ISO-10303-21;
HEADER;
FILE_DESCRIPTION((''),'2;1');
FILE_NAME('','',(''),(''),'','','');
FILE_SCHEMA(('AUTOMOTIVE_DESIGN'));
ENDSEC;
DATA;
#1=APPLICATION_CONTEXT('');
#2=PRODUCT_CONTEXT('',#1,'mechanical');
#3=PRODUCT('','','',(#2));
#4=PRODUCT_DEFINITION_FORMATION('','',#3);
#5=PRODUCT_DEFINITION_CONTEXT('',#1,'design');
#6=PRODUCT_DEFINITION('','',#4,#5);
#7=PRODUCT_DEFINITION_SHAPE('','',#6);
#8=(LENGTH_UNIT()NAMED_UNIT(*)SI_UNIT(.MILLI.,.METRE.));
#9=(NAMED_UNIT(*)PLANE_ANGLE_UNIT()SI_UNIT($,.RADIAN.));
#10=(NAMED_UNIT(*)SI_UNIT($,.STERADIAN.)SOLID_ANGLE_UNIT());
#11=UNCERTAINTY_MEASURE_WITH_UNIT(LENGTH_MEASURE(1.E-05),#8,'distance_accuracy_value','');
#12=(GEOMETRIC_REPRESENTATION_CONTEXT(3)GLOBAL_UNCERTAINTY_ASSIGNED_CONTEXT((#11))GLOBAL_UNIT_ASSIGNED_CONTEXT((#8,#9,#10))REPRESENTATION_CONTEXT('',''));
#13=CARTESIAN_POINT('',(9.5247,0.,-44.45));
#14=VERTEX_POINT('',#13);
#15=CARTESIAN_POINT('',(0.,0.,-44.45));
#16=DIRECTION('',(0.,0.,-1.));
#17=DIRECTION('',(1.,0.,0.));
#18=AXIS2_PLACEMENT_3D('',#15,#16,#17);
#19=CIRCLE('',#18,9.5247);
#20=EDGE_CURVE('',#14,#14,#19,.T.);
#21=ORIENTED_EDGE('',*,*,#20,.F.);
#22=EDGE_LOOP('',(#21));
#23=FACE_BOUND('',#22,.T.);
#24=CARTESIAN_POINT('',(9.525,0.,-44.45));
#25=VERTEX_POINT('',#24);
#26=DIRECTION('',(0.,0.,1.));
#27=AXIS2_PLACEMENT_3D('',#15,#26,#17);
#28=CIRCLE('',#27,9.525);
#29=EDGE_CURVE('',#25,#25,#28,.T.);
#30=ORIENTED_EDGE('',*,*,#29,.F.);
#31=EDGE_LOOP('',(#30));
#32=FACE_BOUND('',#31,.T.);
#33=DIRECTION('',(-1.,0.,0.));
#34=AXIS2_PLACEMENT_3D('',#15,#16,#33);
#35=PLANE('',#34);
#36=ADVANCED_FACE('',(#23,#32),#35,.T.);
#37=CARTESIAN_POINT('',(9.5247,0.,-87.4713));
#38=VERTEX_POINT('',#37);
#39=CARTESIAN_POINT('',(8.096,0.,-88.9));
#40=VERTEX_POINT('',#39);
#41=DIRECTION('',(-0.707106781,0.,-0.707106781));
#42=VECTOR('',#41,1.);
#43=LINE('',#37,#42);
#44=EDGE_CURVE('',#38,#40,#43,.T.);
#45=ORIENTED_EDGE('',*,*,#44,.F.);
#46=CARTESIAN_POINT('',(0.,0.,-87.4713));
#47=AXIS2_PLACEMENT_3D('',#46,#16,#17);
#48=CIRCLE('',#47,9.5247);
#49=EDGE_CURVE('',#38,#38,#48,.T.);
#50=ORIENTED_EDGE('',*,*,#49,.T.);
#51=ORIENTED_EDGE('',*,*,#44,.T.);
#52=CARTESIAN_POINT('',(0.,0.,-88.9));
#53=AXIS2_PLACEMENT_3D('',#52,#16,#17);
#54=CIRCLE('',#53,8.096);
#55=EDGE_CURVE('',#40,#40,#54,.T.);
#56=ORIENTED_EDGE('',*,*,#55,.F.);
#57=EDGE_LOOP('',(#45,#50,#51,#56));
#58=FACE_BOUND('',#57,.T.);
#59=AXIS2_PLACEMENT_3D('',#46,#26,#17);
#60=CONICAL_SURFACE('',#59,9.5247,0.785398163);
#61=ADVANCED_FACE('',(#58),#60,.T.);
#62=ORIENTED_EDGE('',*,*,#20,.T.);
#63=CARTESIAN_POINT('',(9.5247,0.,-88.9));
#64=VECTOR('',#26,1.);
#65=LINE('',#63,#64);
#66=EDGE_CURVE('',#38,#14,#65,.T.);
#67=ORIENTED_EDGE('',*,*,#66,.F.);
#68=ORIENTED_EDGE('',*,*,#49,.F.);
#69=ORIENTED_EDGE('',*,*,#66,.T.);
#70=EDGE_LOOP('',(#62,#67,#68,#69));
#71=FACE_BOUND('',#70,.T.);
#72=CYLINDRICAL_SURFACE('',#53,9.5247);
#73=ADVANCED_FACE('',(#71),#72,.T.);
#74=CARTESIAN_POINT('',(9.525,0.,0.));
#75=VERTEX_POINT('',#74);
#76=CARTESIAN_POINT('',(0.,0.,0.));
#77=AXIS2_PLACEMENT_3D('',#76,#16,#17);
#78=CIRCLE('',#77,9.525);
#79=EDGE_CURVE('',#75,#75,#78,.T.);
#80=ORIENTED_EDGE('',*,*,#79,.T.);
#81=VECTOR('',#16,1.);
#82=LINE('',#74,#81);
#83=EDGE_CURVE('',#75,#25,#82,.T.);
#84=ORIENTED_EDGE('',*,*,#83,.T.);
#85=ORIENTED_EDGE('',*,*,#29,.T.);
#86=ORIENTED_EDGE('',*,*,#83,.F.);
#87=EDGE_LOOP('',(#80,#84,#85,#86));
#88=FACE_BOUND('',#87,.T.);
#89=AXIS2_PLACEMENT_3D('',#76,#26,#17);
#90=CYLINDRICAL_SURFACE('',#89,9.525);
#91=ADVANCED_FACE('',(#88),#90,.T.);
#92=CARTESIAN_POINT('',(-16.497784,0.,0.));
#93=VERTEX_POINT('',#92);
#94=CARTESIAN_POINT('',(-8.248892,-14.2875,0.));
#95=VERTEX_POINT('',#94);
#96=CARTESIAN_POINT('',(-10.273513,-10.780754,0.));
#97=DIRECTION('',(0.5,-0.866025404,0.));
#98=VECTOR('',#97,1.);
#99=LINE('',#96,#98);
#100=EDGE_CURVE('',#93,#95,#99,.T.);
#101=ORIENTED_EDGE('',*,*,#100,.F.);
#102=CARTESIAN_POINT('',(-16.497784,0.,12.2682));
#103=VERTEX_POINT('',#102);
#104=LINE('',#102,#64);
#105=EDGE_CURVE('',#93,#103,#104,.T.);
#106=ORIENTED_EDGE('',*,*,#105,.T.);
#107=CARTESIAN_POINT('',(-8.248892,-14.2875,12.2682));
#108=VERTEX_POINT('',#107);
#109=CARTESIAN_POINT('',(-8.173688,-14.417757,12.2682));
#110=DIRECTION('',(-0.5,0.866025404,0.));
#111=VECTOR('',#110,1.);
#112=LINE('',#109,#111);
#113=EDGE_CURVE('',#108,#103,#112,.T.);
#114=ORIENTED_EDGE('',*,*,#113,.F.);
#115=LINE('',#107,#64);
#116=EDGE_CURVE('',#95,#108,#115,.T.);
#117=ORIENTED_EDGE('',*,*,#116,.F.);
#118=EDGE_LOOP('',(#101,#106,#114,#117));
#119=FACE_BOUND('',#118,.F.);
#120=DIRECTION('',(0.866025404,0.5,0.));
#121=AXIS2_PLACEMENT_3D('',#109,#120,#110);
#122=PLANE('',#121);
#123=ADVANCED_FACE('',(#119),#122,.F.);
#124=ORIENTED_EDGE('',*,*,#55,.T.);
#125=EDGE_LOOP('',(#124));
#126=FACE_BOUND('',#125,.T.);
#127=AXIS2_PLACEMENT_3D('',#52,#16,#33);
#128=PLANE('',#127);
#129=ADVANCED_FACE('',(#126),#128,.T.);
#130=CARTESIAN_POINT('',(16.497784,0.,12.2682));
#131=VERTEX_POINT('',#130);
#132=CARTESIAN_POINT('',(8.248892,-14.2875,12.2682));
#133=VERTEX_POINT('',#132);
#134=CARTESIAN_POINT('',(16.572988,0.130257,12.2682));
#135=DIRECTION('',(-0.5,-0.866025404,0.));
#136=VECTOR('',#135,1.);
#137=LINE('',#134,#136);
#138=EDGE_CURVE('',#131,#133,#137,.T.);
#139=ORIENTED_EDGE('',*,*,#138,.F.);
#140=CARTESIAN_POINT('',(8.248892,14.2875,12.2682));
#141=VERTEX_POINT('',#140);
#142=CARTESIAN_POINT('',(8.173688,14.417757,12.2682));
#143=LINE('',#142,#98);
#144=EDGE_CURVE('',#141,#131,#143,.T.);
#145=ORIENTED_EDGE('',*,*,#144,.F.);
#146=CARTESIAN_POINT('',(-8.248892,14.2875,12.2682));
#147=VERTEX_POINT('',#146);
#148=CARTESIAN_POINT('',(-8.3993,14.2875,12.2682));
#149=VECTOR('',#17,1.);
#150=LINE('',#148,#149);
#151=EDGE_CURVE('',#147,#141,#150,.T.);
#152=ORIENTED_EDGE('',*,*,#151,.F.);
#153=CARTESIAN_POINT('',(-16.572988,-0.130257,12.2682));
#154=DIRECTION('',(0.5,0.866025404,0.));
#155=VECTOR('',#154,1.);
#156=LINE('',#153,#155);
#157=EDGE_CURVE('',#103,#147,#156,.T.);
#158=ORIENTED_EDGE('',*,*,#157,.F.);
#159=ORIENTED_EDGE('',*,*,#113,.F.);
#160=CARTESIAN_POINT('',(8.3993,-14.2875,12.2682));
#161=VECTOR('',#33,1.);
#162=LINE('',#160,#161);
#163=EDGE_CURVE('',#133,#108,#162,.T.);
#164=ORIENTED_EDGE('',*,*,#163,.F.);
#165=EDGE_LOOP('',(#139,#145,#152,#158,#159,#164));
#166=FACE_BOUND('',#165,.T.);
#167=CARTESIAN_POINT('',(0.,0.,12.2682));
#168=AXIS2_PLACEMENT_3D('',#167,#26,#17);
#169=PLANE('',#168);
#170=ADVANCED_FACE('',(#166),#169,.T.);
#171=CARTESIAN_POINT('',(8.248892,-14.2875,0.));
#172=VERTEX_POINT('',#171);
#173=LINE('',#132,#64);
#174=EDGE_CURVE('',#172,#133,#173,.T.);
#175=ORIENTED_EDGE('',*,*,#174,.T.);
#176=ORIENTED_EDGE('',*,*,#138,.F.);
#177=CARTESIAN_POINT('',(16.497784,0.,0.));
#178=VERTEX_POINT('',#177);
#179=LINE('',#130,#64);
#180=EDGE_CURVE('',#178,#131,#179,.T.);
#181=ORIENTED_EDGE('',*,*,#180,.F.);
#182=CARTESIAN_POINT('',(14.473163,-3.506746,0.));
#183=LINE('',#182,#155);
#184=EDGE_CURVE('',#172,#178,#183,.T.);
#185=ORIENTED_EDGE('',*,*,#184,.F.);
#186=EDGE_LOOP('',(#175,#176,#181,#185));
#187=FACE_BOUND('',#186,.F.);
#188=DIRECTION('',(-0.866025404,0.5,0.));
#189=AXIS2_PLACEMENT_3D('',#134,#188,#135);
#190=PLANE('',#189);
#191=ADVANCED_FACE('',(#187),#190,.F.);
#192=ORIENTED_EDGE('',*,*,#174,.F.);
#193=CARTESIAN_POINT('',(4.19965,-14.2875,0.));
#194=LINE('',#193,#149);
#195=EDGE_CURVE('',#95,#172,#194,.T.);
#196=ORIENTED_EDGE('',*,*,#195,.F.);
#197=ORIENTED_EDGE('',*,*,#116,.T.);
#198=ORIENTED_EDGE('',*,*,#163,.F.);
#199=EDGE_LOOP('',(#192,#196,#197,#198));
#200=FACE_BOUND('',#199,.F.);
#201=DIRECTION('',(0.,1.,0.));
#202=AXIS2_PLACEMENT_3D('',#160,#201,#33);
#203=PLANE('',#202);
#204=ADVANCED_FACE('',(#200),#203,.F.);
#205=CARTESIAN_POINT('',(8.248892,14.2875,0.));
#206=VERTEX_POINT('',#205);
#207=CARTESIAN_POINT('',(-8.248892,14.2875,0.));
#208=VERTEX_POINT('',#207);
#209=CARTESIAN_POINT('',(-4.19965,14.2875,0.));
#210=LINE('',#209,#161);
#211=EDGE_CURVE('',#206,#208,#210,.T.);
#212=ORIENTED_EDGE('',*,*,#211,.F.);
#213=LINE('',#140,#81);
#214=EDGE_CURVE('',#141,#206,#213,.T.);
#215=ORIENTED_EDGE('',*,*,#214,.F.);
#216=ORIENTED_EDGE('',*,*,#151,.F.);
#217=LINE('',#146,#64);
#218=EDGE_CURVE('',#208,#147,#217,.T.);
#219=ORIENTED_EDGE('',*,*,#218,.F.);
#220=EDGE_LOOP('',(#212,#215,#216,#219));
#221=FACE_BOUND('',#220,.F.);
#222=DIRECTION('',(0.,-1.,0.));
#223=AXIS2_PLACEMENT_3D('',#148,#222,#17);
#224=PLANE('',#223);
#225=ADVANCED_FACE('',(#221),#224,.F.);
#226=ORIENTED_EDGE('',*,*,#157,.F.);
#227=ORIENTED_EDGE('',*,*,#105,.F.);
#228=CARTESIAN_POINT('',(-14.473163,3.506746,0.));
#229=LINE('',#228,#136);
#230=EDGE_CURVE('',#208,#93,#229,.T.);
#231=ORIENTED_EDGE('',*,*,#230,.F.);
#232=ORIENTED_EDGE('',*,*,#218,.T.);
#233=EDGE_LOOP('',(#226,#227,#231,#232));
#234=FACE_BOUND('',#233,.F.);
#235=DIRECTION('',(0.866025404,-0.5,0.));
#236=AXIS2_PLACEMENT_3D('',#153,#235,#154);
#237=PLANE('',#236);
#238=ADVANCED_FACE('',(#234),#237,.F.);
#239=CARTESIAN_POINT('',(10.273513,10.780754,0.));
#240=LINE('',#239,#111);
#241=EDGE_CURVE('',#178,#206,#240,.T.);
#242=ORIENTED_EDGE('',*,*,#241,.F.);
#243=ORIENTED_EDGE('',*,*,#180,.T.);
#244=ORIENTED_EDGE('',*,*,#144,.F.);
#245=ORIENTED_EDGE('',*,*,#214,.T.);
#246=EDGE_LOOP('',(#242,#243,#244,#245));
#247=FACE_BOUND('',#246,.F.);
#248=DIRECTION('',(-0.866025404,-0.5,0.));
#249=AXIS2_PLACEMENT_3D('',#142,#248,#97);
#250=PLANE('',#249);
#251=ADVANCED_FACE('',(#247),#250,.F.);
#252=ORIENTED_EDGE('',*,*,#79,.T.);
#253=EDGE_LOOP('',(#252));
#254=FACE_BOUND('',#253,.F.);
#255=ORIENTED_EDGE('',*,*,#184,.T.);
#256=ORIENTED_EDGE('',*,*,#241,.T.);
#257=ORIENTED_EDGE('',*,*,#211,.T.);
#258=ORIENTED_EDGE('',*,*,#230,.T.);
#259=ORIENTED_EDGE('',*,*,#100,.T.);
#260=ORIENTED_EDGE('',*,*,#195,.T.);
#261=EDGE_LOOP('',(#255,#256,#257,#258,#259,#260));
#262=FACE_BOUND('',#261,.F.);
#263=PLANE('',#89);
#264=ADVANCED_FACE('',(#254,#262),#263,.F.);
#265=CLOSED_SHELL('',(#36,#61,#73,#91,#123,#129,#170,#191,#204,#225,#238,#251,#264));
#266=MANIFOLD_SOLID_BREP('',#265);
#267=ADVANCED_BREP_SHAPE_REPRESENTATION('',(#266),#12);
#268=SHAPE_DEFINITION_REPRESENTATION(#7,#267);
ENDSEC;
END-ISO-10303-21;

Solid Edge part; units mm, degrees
sketch "Sketch1" plane through (0, 0, 0) normal (0, 0, 1) x (1, 0, 0)
  circle A0 centre (0, 0) radius 16.5735
  dimension "D1" = 33.147
extrude "Protrusion1" add sketch "Sketch1" along normal blind 12.2682
sketch "Sketch2" plane through (0, 0, 0) normal (0, 0, -1) x (1, 0, 0)
  circle A0 centre (0, 0) radius 9.525
extrude "Protrusion2" add sketch "Sketch2" along normal blind 88.9
sketch "Sketch3" plane through (0, 0, -88.9) normal (0, 0, -1) x (1, 0, 0)
  circle A0 centre (0, 0) radius 9.5247
extrude "Cutout1" cut sketch "Sketch3" against normal blind 44.45 flip side to cut
chamfer "Chamfer_1" distance 1.4287 angle 45 1 edges at (-9.5247, 0, -88.9)
sketch "Sketch4" plane through (0, 0, 12.2682) normal (0, 0, 1) x (1, 0, 0)
  line L0 (-8.3993, 14.2875) -> (8.3993, 14.2875)
  dimension "D1" = 28.575
extrude "Cutout2" cut sketch "Sketch4" against normal up to next material side at (0, 14.3375, 12.2682)
pattern_circular "Pattern1" count 6 over 360 about axis through (0, 0, 12.2682) along (0, 0, 1) of "Cutout2"
properties part number "24104255"
